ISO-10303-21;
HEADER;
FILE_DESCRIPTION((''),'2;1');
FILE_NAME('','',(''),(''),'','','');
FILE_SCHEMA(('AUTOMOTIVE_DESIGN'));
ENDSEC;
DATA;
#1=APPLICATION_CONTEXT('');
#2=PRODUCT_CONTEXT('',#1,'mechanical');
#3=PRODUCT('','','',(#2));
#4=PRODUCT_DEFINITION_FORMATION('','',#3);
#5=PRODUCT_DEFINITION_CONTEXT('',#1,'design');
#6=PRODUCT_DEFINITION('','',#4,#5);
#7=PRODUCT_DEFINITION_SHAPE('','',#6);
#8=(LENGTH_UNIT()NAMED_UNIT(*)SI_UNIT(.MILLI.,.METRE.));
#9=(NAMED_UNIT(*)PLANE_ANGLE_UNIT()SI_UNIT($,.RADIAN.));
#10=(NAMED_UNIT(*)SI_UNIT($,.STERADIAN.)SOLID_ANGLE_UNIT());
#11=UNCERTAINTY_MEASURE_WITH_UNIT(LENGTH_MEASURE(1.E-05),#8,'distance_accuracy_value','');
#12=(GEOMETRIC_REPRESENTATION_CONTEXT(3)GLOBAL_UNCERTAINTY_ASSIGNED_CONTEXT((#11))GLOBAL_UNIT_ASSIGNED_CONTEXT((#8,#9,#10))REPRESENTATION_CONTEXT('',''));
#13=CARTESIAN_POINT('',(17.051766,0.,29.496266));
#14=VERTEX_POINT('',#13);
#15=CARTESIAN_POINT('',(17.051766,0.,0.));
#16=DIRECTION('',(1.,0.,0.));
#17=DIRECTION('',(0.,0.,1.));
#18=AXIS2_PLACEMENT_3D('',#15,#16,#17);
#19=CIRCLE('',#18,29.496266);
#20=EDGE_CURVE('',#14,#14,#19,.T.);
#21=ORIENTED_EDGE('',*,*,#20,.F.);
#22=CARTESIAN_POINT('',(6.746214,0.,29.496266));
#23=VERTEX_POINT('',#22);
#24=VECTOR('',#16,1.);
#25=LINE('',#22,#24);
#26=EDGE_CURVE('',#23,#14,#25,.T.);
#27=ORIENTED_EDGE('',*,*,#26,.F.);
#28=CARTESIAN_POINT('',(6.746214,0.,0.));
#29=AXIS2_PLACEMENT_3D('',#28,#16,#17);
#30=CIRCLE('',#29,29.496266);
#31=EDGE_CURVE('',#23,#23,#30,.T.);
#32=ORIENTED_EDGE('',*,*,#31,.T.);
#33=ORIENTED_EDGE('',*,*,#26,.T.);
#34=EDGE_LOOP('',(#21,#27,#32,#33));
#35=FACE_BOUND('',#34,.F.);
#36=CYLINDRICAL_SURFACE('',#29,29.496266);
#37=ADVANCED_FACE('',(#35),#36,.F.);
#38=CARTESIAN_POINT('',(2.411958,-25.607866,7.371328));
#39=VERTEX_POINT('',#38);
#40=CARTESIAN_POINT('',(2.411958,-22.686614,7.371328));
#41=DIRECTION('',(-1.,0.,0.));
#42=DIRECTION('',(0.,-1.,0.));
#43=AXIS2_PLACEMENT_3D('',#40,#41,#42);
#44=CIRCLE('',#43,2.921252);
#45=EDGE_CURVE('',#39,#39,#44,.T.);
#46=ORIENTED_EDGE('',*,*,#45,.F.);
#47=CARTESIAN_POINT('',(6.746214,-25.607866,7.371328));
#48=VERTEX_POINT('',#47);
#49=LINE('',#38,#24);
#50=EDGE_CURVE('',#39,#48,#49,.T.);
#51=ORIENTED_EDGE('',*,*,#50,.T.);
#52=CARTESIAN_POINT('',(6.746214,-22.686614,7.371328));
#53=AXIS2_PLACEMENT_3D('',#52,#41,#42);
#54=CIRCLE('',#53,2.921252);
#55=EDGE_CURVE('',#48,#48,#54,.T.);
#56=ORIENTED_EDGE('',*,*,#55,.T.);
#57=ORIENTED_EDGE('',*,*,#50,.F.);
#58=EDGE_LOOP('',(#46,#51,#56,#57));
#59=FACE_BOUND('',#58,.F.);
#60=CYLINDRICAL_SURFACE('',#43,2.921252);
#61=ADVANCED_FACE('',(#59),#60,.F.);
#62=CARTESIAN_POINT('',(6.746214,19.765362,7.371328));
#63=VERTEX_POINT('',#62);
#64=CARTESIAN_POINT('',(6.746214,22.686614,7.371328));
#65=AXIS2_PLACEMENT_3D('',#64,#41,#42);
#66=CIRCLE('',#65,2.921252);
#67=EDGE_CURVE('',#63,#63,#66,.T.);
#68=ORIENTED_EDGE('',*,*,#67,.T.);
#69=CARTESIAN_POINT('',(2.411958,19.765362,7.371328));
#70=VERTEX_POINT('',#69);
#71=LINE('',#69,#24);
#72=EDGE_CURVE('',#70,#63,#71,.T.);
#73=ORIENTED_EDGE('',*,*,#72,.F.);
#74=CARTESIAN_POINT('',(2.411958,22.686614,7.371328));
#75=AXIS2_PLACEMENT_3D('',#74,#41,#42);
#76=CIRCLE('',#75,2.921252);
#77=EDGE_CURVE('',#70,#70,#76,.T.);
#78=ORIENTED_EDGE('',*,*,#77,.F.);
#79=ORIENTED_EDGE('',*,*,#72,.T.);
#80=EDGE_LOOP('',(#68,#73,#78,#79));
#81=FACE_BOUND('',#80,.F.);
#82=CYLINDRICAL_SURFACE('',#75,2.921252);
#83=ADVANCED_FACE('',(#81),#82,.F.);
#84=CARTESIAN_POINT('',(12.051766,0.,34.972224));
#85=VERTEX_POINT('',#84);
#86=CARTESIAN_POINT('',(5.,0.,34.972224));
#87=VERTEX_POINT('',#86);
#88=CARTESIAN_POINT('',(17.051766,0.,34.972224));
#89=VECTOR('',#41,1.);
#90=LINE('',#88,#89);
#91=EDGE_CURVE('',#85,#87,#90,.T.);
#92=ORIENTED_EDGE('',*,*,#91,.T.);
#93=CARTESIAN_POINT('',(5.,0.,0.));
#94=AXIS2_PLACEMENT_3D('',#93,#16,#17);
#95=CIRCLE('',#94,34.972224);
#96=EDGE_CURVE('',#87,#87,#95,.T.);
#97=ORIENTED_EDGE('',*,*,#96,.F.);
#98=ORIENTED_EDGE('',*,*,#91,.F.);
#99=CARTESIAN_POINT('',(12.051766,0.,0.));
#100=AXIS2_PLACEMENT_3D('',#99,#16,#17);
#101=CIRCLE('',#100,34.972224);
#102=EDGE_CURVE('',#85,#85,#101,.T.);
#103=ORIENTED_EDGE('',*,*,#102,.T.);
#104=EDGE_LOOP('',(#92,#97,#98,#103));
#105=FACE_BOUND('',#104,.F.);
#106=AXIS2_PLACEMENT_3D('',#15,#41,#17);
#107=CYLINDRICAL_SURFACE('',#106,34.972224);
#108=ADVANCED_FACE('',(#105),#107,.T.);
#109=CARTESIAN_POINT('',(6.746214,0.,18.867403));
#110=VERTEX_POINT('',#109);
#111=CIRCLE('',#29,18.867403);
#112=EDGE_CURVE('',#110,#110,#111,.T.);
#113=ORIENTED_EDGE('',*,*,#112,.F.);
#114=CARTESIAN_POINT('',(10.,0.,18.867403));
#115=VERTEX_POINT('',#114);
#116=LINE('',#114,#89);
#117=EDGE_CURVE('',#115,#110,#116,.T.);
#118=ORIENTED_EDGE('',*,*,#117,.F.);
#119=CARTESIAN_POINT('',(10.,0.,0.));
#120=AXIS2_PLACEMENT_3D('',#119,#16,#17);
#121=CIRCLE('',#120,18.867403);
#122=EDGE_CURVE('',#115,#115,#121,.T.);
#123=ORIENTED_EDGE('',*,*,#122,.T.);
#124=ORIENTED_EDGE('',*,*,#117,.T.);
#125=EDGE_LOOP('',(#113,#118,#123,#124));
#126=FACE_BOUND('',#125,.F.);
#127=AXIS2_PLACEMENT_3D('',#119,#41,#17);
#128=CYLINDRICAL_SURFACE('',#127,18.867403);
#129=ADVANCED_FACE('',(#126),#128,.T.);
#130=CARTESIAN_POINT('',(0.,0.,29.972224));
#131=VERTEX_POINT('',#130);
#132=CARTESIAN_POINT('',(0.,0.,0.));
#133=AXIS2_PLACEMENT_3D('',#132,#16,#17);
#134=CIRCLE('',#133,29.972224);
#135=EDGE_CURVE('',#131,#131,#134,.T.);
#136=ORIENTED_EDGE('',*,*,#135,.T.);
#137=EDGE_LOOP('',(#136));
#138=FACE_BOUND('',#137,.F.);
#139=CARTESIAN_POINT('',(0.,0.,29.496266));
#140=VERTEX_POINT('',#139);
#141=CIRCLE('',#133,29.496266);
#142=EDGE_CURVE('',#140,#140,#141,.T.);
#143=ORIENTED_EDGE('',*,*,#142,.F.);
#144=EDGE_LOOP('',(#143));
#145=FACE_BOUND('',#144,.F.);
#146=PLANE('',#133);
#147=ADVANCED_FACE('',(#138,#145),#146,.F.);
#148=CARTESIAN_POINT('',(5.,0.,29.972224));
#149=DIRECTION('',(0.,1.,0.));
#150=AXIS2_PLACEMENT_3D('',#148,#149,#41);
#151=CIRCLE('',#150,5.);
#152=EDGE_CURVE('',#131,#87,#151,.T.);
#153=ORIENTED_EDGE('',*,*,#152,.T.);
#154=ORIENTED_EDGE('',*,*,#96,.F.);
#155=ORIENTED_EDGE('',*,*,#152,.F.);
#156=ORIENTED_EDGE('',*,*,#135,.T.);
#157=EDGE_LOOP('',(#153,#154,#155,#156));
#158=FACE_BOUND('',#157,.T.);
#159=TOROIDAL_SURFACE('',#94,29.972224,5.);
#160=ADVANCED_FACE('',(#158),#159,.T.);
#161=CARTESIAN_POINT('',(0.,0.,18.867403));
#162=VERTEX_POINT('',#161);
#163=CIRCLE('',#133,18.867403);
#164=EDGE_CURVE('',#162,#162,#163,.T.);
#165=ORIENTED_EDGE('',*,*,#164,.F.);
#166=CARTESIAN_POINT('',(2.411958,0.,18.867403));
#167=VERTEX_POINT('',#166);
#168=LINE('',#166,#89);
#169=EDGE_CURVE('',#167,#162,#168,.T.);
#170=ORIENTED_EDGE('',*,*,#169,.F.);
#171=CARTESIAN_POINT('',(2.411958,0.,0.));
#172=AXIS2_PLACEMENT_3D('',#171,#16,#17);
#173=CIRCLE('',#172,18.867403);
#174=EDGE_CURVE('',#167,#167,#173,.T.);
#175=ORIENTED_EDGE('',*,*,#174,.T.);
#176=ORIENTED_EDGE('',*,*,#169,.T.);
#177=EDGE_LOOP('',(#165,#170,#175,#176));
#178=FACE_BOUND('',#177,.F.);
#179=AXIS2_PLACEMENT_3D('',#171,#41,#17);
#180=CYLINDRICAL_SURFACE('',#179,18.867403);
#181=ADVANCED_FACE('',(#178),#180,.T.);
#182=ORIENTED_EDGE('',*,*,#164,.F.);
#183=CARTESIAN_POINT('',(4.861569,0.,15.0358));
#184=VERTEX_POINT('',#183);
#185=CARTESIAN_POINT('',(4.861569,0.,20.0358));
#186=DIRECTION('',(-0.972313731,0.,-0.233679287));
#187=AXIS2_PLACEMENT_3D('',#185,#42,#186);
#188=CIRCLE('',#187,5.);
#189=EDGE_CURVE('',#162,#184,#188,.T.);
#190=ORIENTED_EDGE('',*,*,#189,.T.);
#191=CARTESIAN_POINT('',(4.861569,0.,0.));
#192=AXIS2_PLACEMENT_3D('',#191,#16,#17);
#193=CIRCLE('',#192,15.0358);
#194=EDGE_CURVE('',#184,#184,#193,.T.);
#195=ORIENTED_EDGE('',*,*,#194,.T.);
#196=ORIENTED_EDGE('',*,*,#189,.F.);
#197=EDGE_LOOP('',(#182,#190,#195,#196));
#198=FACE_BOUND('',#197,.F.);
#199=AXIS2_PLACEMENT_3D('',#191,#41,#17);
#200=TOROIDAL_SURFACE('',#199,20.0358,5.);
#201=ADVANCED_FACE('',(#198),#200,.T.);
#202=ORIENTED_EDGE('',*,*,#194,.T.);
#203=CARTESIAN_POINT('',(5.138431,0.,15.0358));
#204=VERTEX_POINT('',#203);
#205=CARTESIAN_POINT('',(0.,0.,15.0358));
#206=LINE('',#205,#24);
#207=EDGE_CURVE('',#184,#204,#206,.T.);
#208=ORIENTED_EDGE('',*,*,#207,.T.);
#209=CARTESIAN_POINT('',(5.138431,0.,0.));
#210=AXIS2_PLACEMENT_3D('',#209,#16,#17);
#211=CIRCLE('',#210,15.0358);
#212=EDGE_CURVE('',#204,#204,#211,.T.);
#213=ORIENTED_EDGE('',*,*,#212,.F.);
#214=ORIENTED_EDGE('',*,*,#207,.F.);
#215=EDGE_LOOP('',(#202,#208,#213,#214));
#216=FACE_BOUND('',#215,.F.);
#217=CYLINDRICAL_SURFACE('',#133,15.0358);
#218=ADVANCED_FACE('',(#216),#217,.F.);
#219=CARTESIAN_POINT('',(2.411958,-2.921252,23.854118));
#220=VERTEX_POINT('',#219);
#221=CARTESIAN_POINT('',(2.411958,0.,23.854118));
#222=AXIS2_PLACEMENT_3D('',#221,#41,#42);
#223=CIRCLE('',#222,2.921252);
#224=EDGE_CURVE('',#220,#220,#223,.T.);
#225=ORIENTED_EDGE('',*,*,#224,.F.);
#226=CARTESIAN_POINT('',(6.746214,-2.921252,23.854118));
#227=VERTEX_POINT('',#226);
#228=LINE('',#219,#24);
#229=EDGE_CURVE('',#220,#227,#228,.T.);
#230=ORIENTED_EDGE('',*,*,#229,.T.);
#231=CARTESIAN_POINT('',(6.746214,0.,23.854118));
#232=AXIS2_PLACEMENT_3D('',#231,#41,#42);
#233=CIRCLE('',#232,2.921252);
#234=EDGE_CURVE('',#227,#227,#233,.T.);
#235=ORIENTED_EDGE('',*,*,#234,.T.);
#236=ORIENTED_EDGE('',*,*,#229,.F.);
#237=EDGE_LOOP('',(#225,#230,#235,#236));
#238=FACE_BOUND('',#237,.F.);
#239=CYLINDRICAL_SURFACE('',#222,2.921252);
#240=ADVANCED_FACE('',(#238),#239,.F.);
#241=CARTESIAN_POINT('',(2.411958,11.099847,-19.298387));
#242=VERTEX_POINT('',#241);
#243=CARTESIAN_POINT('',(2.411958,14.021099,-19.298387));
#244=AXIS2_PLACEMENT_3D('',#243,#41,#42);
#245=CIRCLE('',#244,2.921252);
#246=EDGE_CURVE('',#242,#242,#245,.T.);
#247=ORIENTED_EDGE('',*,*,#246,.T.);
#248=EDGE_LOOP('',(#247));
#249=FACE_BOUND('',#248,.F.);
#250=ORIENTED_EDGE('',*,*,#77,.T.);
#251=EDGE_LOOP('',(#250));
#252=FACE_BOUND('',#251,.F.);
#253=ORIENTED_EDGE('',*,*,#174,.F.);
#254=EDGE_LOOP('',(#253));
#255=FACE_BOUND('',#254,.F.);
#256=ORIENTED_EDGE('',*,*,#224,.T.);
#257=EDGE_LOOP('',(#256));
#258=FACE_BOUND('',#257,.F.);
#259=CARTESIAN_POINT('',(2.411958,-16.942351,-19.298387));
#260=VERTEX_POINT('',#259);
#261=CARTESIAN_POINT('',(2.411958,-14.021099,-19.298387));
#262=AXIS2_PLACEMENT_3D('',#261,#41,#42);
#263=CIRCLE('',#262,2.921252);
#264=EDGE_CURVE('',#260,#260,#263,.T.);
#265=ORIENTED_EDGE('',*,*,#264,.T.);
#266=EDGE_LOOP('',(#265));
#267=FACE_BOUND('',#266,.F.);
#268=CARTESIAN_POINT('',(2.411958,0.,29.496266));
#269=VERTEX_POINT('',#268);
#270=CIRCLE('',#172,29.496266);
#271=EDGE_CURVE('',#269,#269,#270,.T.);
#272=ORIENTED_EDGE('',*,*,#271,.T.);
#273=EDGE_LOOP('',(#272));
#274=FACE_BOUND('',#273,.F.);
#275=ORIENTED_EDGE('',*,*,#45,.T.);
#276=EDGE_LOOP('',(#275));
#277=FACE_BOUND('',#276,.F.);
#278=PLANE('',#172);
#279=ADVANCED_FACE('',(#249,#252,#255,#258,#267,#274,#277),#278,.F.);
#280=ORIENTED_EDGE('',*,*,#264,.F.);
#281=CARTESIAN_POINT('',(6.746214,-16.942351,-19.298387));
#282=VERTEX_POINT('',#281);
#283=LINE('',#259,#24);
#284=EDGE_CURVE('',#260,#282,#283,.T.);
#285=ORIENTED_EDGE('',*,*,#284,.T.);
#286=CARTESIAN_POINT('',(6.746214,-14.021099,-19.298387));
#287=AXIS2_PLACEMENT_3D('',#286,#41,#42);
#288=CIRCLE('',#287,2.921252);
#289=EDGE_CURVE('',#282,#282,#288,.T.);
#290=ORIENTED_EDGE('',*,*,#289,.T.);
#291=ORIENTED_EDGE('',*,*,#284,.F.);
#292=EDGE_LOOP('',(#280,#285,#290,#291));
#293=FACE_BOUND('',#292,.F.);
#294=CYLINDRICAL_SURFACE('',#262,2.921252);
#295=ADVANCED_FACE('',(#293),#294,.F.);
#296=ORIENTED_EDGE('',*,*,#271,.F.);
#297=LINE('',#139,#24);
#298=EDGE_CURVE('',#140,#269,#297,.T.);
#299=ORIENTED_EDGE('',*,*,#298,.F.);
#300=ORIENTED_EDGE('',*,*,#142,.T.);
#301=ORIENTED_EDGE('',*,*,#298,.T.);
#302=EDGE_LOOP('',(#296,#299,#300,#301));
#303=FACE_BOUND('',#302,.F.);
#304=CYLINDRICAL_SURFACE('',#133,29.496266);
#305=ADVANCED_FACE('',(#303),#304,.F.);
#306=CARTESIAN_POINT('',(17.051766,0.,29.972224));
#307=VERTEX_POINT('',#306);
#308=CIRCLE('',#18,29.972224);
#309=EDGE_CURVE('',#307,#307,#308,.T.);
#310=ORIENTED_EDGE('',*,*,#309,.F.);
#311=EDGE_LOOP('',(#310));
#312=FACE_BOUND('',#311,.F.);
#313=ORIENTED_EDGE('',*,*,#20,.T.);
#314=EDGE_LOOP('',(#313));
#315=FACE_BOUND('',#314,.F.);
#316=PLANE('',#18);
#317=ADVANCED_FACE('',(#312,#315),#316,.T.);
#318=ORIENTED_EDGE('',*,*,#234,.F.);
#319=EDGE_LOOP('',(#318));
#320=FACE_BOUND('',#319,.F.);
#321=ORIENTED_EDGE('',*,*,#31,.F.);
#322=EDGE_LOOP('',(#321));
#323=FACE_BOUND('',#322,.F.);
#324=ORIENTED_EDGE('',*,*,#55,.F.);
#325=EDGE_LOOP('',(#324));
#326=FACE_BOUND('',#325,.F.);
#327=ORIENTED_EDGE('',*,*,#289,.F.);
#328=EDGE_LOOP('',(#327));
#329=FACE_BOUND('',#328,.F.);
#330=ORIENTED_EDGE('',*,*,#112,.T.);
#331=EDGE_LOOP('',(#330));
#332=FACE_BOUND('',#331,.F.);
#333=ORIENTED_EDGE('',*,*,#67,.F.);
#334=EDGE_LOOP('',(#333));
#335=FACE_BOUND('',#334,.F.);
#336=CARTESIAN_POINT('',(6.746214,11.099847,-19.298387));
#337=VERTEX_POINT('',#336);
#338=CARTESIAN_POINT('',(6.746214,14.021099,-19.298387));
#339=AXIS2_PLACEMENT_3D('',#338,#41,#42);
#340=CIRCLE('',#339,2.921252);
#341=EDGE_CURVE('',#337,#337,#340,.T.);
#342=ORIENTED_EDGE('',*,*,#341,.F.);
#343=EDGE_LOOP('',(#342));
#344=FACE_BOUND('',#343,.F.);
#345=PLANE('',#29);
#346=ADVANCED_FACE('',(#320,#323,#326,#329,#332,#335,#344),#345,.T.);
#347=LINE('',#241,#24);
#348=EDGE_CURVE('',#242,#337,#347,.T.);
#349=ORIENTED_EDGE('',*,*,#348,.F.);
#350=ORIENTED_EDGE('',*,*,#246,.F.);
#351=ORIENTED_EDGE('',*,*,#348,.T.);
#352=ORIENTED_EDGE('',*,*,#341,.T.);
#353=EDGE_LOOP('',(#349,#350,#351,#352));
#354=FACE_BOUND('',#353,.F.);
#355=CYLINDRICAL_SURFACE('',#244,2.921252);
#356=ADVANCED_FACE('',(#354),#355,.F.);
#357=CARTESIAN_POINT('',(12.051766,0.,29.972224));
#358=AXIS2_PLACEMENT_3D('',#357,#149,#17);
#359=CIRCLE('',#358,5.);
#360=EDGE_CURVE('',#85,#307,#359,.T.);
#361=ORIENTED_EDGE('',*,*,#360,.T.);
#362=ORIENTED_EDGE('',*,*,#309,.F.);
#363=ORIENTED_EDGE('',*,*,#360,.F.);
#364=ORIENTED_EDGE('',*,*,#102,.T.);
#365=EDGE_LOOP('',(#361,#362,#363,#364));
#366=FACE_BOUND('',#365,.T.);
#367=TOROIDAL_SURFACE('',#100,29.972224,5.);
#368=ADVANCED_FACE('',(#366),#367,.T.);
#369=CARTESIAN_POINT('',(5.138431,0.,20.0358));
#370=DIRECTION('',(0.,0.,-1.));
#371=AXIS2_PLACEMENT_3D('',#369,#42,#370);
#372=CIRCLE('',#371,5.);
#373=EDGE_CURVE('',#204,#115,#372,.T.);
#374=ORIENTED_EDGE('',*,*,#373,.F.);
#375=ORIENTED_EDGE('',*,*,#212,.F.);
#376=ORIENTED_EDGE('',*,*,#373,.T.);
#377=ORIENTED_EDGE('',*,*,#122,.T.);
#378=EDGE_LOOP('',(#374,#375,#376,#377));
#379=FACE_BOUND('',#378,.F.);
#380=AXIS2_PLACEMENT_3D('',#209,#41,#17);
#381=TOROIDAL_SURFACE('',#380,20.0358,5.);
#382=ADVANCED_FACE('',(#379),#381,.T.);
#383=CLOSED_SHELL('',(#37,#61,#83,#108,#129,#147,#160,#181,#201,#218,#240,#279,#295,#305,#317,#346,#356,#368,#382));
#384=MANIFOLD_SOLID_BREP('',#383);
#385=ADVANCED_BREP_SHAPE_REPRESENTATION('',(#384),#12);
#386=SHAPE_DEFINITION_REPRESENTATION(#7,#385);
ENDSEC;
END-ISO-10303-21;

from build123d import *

# Parameters (mm, degrees)
F2_R     = 2.9212519553
F3_DEPTH = 25


# Not quite as in the source:
# - a fillet or chamfer that OpenCascade refuses, or shapes differently, is made with other operations: its cross-section is extruded or revolved along the edge and cut away or added


with BuildPart() as f1:
    # F0 (on Front) → F1 (revolve)
    with BuildSketch(Plane.XZ):
        Polygon((0, 18.8674032688), (0, 15.0357997045), (10, 15.0357997045), (10, 18.8674032688), (6.7462138832, 18.8674032688), (6.7462138832, 29.4962655753), (17.0517656952, 29.4962655753), (17.0517656952, 34.9722243845), (0, 34.9722243845), (0, 29.4962655753), (2.411958063, 29.4962655753), (2.411958063, 18.8674032688), align=None)
    revolve(axis=Axis((6.3371746801, 0, 0), (1, 0, 0)))

    # F2 (on face) → F3 (cut)
    with BuildSketch(Plane(origin=(2.411958063, 0, 0), x_dir=(0, -1, 0), z_dir=(-1, 0, 0))):
        with Locations((-22.6866142127, 7.3713277985)):
            Circle(F2_R)
        with Locations((0, 23.8541178405)):
            Circle(F2_R)
        with Locations((22.6866142127, 7.3713277985)):
            Circle(F2_R)
        with Locations((14.0210986731, -19.2983867188)):
            Circle(F2_R)
        with Locations((-14.0210986731, -19.2983867188)):
            Circle(F2_R)
    extrude(amount=-F3_DEPTH, mode=Mode.SUBTRACT)

    # F4: fillet of radius 5 on 4 edges, made by hand

    # F4_s1 → F4_t2 (revolve, cut)
    with BuildSketch(Plane.XZ):
        with BuildLine():
            ThreePointArc((0, 29.9722243845), (1.4644660941, 33.5077582905), (5, 34.9722243845))
            Line((5, 34.9722243845), (5, 35.0722243845))
            Line((5, 35.0722243845), (-0.1, 35.0722243845))
            Line((-0.1, 35.0722243845), (-0.1, 29.9722243845))
            Line((-0.1, 29.9722243845), (0, 29.9722243845))
        make_face()
    revolve(axis=Axis((0, 0, 0), (1, 0, 0)), mode=Mode.SUBTRACT)

    # F4_s3 → F4_t4 (revolve, cut)
    with BuildSketch(Plane.XZ):
        with BuildLine():
            ThreePointArc((0, 18.8674032688), (1.7665712524, 16.1088427288), (4.8615686531, 15.0357997045))
            Line((4.8615686531, 15.0357997045), (4.8615686531, 14.9357997045))
            Line((4.8615686531, 14.9357997045), (0, 14.9357997045))
            Line((0, 14.9357997045), (-0.1, 15.0357997045))
            ThreePointArc((-0.1, 15.0357997045), (-0.1, 16.9516014867), (-0.0972313731, 18.8440353401))
            Line((-0.0972313731, 18.8440353401), (0, 18.8674032688))
        make_face()
    revolve(axis=Axis((0, 0, 0), (1, 0, 0)), mode=Mode.SUBTRACT)

    # F4_s5 → F4_t6 (revolve, cut)
    with BuildSketch(Plane.XZ):
        with BuildLine():
            ThreePointArc((12.0517656952, 34.9722243845), (15.5872996011, 33.5077582905), (17.0517656952, 29.9722243845))
            Line((17.0517656952, 29.9722243845), (17.1517656952, 29.9722243845))
            Line((17.1517656952, 29.9722243845), (17.1517656952, 35.0722243845))
            Line((17.1517656952, 35.0722243845), (12.0517656952, 35.0722243845))
            Line((12.0517656952, 35.0722243845), (12.0517656952, 34.9722243845))
        make_face()
    revolve(axis=Axis((17.0517656952, 0, 0), (1, 0, 0)), mode=Mode.SUBTRACT)

    # F4_s7 → F4_t8 (revolve, cut)
    with BuildSketch(Plane.XZ):
        with BuildLine():
            ThreePointArc((5.1384313469, 15.0357997045), (8.2334287476, 16.1088427288), (10, 18.8674032688))
            Line((10, 18.8674032688), (10.0972313731, 18.8440353401))
            ThreePointArc((10.0972313731, 18.8440353401), (10.1, 16.9516014867), (10.1, 15.0357997045))
            Line((10.1, 15.0357997045), (10, 14.9357997045))
            Line((10, 14.9357997045), (5.1384313469, 14.9357997045))
            Line((5.1384313469, 14.9357997045), (5.1384313469, 15.0357997045))
        make_face()
    revolve(axis=Axis((10, 0, 0), (1, 0, 0)), mode=Mode.SUBTRACT)


solid = f1.part
